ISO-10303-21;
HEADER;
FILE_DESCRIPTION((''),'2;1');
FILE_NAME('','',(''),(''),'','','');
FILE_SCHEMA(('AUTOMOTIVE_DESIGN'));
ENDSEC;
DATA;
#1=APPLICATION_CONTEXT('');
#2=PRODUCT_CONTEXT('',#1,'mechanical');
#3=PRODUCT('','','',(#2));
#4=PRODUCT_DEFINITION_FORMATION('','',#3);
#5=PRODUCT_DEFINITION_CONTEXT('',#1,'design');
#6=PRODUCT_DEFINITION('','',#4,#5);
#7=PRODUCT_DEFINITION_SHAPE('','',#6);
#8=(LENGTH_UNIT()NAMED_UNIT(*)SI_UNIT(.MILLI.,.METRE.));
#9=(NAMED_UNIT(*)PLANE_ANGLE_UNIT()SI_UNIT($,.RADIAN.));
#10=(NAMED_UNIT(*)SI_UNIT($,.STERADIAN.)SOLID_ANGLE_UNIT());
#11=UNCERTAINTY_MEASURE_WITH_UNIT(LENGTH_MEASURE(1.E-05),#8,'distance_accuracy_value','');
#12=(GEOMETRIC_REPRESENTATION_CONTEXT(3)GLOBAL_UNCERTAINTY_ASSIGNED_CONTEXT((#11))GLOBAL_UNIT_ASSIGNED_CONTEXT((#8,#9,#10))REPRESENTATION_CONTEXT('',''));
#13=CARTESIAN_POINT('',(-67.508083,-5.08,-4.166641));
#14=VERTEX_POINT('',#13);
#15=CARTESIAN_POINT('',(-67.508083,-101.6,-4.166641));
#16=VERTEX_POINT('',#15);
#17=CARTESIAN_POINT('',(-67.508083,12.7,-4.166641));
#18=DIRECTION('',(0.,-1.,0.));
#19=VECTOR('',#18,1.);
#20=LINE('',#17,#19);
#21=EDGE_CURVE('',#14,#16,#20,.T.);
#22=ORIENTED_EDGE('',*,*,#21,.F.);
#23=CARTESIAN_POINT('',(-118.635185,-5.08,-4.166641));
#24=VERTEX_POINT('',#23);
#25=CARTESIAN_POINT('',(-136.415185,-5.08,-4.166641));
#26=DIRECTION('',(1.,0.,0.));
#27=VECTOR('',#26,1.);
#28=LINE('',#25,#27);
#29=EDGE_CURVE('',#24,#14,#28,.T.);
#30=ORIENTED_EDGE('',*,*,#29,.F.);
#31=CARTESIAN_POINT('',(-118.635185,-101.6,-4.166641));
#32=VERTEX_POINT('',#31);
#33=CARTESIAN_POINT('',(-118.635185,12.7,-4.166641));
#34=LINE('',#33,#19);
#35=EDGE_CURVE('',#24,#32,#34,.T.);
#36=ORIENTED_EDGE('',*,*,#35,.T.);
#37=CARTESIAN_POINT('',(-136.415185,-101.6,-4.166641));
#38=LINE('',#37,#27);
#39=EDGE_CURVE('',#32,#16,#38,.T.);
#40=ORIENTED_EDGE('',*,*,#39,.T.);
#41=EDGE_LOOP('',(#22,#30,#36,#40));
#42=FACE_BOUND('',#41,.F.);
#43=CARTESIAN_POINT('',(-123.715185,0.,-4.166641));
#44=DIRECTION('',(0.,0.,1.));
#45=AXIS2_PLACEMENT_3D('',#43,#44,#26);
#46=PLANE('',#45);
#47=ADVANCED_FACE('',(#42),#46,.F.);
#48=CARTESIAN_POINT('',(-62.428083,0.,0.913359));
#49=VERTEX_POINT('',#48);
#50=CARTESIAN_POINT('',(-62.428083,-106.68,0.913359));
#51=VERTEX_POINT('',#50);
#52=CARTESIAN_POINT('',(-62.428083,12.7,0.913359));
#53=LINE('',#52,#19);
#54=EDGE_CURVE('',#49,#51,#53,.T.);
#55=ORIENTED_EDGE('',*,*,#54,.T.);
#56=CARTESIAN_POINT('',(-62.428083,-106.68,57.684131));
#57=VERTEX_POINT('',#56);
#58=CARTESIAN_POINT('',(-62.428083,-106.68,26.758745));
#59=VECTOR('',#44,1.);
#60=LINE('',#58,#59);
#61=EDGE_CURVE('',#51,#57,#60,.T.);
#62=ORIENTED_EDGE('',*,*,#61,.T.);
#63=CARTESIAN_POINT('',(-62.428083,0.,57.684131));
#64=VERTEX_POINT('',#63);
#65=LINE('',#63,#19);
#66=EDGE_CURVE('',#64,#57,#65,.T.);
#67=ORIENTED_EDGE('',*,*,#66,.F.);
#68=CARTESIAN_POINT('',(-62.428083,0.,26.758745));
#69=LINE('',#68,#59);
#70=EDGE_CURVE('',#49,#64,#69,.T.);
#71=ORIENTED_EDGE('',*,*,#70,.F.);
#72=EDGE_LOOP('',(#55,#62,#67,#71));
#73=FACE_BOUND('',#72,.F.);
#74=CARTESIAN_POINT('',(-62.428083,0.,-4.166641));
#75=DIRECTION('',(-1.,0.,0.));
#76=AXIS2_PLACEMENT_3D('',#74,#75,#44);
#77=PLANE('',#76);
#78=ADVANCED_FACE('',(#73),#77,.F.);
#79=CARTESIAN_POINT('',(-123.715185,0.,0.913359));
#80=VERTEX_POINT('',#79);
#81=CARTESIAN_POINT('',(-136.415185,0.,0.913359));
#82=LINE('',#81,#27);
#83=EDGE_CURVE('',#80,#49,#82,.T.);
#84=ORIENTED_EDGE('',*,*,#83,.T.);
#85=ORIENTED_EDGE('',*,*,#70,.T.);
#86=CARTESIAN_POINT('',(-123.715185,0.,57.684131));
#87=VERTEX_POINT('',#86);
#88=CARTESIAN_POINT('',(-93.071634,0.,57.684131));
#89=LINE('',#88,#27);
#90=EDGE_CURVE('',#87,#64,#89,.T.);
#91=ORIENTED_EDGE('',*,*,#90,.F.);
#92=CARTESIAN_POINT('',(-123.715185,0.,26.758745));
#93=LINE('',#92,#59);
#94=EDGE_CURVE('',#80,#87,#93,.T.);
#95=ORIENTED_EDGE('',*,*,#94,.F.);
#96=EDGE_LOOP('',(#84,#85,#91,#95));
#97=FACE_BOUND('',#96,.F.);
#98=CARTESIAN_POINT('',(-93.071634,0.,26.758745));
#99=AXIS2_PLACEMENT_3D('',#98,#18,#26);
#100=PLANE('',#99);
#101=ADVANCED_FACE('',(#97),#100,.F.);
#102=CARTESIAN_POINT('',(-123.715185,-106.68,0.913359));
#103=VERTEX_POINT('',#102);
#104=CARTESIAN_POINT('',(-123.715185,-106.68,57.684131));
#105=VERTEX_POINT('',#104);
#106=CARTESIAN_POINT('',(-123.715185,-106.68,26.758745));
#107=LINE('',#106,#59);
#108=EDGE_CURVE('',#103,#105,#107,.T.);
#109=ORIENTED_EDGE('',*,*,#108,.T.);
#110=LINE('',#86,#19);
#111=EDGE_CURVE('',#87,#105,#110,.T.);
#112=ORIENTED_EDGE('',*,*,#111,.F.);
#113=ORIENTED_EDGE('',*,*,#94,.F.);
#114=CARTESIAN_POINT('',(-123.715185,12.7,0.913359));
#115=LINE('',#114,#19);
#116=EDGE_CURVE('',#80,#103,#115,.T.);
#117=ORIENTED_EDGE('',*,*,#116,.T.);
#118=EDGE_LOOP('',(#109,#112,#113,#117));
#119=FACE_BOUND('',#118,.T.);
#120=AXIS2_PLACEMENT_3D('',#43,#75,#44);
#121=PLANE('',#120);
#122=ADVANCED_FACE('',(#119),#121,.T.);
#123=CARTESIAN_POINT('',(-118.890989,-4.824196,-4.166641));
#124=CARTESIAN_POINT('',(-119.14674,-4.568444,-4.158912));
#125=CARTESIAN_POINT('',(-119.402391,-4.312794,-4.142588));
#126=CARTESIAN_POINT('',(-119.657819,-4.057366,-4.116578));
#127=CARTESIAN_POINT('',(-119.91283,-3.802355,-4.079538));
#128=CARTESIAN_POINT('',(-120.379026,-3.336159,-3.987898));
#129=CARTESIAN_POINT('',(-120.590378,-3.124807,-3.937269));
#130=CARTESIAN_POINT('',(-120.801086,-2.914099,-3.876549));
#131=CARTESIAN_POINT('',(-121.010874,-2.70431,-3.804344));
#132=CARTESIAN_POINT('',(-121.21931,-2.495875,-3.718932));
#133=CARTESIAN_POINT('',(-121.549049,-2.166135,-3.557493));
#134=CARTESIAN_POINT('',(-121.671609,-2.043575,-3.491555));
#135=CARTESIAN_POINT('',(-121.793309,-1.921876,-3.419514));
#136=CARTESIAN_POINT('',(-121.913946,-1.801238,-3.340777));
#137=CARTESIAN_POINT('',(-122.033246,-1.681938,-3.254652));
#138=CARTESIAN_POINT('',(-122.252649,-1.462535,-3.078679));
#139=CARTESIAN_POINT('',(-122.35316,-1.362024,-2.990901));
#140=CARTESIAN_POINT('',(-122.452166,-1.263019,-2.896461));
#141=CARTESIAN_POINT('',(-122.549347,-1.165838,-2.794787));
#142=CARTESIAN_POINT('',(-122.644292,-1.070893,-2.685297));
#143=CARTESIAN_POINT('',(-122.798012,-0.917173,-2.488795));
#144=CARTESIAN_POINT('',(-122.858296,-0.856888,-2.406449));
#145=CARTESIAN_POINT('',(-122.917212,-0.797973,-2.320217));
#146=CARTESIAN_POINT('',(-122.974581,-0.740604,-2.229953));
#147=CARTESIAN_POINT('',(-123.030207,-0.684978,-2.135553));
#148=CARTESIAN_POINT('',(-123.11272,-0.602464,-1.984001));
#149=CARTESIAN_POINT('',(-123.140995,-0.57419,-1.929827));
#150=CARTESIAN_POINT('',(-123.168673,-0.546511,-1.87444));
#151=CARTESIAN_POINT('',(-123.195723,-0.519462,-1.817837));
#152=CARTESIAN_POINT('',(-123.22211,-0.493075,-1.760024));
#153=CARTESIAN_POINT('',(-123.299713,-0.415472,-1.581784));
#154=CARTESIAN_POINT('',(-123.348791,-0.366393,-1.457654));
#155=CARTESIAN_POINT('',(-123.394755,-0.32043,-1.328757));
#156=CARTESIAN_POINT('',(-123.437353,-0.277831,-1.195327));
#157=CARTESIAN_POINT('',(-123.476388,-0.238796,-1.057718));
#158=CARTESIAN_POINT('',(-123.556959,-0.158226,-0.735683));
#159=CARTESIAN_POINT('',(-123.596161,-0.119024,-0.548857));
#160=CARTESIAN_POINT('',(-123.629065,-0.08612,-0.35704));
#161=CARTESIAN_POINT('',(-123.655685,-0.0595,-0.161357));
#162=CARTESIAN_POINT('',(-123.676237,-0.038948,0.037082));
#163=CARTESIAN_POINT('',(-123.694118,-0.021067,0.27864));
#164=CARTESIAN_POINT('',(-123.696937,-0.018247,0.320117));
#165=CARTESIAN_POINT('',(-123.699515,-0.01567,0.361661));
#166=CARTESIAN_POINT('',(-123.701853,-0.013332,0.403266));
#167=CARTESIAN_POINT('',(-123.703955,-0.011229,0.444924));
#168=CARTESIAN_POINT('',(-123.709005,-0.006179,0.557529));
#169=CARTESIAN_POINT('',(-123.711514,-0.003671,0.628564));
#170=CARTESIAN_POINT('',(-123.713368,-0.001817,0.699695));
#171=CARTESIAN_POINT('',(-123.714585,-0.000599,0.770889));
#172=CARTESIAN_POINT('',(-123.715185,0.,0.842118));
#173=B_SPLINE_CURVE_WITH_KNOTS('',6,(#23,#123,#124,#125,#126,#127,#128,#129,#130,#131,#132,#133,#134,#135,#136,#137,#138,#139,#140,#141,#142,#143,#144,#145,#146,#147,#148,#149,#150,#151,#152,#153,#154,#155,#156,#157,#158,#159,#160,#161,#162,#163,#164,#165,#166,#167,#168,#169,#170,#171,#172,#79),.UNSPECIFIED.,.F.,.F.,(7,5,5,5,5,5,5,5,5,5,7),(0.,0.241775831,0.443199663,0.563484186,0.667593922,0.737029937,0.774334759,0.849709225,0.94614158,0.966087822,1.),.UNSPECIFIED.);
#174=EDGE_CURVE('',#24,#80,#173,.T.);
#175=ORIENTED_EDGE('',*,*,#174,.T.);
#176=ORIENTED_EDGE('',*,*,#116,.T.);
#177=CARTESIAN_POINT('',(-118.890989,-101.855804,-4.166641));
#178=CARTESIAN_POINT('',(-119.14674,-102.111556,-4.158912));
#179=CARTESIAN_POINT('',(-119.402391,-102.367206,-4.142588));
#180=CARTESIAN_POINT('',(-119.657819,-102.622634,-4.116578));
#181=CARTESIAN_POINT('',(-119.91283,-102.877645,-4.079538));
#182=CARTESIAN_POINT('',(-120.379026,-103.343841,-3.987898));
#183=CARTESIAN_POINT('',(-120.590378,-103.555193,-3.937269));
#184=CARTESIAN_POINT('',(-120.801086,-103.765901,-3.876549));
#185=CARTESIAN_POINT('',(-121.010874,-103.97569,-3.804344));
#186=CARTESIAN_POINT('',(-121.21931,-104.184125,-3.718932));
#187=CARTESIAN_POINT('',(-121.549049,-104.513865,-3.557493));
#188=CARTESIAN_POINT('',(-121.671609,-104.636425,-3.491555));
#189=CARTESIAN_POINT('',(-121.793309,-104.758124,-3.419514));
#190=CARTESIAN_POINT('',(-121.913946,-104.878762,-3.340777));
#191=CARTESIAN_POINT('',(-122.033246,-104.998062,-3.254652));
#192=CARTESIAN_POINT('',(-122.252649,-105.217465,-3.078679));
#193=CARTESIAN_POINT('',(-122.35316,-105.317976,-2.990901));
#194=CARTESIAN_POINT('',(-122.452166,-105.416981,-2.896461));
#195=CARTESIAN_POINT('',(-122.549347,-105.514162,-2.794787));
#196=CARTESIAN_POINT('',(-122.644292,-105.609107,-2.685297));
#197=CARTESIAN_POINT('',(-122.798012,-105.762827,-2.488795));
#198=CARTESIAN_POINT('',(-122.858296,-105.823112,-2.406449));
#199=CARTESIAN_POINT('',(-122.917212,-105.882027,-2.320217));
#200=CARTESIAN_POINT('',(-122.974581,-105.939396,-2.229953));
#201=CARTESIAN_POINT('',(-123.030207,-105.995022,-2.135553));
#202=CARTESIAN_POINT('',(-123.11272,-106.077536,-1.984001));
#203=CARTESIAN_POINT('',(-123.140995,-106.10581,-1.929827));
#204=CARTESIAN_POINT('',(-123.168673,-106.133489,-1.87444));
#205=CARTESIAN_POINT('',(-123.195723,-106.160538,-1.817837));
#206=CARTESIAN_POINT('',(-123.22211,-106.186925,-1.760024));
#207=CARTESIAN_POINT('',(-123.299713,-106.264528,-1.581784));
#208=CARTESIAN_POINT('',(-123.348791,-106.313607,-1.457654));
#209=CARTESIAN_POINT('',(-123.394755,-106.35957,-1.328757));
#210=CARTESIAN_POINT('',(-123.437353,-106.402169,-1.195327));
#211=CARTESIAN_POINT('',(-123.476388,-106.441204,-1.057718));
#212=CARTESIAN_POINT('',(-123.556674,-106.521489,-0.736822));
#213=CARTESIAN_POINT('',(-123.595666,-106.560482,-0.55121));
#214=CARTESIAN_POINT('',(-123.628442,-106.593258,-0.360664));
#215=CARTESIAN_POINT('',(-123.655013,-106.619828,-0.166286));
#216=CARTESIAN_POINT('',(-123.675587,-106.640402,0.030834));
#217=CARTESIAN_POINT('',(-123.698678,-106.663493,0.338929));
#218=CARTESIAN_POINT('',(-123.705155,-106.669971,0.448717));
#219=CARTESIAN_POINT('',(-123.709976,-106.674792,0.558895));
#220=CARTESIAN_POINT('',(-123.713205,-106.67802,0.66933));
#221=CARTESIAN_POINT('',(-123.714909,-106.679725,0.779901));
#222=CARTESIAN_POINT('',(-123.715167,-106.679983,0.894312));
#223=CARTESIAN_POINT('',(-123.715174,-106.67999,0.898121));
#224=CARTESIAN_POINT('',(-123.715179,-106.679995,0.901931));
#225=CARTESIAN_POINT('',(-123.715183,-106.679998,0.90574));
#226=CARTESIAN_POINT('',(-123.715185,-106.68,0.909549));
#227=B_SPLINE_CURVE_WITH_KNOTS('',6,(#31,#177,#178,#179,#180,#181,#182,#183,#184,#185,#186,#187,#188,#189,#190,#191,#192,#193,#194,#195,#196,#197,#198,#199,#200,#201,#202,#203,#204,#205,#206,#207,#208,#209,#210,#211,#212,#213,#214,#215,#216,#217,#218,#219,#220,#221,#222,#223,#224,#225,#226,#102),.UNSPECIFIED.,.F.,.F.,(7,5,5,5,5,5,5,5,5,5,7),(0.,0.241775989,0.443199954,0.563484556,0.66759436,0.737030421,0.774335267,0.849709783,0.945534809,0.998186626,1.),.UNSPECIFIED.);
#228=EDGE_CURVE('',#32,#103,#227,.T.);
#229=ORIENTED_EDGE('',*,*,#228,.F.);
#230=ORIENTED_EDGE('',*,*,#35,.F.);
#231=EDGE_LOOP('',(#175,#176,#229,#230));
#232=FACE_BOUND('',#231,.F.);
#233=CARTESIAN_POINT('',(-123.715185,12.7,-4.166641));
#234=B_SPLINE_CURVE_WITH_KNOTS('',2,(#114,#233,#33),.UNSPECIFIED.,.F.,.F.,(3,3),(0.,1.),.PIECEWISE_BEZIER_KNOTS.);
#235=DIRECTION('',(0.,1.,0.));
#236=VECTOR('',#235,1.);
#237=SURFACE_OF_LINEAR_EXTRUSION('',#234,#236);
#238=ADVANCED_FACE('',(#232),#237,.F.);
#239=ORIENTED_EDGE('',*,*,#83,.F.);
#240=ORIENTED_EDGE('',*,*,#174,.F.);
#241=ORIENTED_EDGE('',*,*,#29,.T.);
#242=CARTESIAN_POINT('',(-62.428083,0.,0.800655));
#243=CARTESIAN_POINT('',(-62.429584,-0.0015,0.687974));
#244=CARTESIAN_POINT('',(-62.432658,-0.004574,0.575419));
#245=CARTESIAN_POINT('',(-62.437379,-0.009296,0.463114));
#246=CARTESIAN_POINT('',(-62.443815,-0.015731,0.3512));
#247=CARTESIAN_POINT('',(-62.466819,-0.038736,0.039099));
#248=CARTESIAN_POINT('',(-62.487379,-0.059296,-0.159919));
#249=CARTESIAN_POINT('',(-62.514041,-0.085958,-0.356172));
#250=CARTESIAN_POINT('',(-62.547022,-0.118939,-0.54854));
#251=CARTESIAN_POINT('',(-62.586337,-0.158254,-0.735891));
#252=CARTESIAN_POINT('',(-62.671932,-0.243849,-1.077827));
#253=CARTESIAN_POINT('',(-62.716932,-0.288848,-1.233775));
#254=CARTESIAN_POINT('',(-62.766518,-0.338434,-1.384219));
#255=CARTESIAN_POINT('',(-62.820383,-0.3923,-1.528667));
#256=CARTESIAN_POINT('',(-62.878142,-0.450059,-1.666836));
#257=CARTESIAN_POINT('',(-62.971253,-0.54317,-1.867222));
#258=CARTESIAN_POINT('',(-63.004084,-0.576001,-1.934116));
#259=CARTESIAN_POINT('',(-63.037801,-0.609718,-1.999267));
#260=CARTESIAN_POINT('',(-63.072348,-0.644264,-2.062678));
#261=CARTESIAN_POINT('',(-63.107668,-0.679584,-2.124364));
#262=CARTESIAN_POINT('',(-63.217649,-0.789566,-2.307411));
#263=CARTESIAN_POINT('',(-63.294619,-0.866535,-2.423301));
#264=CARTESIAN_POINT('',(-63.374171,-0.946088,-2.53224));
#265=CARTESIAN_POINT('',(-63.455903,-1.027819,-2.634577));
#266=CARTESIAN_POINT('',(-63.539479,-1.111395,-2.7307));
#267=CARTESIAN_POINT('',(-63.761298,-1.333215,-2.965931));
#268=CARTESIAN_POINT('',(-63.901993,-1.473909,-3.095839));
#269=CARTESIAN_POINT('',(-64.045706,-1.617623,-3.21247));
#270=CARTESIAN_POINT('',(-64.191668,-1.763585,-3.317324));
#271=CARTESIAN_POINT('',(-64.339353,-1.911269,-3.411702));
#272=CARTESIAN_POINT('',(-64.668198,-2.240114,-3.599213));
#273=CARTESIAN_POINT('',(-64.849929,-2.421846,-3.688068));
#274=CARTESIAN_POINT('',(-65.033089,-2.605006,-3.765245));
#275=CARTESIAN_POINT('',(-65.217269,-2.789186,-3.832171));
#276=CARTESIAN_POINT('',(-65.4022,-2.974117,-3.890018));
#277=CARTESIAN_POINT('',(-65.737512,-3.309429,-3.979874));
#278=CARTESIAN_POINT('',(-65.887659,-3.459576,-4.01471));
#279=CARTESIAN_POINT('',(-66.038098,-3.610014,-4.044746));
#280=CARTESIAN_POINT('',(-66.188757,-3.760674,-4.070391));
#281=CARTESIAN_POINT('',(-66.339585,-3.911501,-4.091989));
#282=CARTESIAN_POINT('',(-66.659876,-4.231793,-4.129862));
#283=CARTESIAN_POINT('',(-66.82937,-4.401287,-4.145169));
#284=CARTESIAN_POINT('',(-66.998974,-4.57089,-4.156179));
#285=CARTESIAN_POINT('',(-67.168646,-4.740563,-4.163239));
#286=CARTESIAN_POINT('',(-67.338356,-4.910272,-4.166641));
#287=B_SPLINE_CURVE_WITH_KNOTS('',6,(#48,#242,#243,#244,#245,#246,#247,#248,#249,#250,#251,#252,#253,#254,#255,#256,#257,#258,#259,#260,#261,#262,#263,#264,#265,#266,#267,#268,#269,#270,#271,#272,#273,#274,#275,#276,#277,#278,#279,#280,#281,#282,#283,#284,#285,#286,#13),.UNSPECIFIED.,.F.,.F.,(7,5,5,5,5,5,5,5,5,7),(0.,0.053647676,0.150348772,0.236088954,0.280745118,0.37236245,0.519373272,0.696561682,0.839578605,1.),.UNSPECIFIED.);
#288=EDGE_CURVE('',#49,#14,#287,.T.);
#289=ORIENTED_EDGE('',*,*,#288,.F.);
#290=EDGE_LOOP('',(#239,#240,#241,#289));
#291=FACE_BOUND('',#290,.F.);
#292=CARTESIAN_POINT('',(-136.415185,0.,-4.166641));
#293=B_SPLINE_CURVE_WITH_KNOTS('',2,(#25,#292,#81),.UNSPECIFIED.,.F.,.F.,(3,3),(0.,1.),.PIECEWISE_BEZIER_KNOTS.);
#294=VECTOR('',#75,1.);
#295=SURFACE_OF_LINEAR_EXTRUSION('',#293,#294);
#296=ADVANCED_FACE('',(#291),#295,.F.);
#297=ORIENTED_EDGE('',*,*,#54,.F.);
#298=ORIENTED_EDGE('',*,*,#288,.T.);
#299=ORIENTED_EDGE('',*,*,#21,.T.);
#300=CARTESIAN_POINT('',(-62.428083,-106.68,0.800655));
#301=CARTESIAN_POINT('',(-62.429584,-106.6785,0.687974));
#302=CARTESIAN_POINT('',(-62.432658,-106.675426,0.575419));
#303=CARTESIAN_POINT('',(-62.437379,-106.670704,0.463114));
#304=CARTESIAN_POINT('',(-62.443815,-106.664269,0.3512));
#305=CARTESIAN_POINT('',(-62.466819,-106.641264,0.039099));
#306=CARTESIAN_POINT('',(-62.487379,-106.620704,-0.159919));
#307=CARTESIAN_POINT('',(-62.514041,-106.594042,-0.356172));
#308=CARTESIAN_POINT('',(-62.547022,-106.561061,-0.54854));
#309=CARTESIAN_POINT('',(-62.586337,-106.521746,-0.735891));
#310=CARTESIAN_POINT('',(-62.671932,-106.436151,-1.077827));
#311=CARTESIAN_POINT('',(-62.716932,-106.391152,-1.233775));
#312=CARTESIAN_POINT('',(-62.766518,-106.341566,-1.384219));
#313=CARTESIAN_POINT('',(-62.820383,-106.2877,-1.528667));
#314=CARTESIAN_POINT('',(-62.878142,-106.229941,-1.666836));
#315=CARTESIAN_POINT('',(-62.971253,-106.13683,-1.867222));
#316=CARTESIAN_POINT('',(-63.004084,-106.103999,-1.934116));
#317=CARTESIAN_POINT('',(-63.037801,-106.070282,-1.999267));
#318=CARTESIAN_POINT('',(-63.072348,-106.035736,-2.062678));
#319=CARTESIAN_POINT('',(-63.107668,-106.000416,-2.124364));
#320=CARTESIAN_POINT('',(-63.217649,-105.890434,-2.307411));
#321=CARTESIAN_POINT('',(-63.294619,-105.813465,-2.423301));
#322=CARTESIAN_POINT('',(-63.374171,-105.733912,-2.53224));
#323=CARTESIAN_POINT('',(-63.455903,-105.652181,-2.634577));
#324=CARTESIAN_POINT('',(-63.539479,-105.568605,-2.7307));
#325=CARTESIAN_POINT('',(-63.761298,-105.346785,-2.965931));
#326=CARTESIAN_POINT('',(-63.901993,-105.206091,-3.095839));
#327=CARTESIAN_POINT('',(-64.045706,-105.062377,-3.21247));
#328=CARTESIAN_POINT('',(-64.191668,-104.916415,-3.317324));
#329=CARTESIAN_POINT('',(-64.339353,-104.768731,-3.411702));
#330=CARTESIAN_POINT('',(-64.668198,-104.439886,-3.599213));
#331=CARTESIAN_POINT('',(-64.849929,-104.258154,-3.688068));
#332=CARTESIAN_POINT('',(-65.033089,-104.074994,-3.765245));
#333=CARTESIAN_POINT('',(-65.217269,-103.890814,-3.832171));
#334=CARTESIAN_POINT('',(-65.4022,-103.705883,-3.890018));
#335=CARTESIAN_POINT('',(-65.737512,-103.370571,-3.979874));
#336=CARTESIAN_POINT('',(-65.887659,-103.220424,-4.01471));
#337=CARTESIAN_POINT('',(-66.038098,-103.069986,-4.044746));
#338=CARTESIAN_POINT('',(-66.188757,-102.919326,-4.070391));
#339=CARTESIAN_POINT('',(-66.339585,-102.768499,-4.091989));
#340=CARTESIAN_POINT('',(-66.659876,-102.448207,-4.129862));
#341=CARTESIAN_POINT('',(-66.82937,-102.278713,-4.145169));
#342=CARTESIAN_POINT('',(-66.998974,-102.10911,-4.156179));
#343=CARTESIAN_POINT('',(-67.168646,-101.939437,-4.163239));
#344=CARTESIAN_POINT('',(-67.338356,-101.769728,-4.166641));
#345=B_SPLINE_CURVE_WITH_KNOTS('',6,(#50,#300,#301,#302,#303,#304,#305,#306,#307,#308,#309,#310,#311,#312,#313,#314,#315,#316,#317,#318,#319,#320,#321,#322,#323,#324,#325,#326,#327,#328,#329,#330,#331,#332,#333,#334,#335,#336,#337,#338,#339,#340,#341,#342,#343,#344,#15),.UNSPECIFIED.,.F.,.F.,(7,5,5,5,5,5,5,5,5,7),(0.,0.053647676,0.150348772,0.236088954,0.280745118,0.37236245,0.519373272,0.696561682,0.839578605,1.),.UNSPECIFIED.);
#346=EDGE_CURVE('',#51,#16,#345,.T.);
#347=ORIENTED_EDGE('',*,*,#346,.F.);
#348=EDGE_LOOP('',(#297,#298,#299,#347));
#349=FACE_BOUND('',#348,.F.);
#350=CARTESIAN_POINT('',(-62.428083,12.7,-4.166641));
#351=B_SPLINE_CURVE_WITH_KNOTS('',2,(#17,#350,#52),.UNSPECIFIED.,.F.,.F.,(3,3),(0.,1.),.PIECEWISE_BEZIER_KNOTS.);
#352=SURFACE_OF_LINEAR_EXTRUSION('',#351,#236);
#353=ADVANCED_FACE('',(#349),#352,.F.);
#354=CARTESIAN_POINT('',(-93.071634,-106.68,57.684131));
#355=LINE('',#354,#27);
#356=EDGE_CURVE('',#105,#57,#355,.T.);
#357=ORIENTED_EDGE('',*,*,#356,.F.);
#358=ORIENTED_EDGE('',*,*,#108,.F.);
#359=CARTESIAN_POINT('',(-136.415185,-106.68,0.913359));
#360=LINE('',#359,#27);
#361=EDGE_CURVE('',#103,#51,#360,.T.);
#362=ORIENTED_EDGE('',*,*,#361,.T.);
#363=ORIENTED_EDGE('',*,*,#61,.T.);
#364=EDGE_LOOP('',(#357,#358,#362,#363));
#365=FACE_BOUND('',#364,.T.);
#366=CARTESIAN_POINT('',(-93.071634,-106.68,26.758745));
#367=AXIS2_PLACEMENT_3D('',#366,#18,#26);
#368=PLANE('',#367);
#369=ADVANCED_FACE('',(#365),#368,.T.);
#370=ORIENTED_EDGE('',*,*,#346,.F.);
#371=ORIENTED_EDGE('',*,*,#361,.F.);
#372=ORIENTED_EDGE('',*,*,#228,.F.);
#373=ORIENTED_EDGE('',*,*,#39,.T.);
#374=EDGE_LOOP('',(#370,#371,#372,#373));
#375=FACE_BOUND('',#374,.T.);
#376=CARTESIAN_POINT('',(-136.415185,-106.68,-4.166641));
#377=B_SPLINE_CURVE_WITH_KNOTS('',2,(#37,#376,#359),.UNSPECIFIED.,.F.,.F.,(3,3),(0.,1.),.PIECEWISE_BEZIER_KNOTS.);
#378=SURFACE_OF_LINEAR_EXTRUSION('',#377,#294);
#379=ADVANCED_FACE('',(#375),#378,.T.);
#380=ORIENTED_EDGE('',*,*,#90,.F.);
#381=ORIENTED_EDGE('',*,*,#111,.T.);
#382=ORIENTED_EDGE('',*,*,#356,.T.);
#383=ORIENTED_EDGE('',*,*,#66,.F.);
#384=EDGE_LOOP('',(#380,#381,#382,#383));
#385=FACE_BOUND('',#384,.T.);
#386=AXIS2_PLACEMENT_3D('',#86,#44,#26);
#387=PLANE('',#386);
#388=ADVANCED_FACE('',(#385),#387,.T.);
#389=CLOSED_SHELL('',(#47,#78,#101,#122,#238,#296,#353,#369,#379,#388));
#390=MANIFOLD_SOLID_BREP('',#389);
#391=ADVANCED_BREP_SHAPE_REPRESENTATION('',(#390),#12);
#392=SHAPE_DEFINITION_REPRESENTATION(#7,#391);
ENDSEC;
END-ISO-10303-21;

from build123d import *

# Parameters (mm, degrees)
F0_W        = 61.2871013582
F0_H        = 61.8507722393
F1_DEPTH    = 106.68
F2_T1_DEPTH = 132.08
F2_T3_DEPTH = 86.6871013582


# Not quite as in the source:
# - a fillet or chamfer that OpenCascade refuses, or shapes differently, is made with other operations: its cross-section is extruded or revolved along the edge and cut away or added


with BuildPart() as f1:
    # F0 (on Front) → F1 (new body)
    with BuildSketch(Plane.XZ):
        with Locations((-93.0716339499, 26.758744847)):
            Rectangle(F0_W, F0_H)
    extrude(amount=F1_DEPTH)

    # F2: fillet of radius 5.08 on 4 edges, made by hand

    # F2_s2 → F2_t1 (cut)
    with BuildSketch(Plane.XZ.offset(-12.7)):
        with BuildLine():
            add(Edge.make_bspline(
                [(-123.715184629, 0.9133587274), (-123.715184629, -4.1666412726), (-118.635184629, -4.1666412726)],
                knots=[0, 0, 0, 1, 1, 1], degree=2, weights=[1, 1, 1]))
            Line((-118.635184629, -4.1666412726), (-123.715184629, -4.1666412726))
            Line((-123.715184629, -4.1666412726), (-123.715184629, 0.9133587274))
        make_face()
        with BuildLine():
            add(Edge.make_bspline(
                [(-67.5080832708, -4.1666412726), (-62.4280832708, -4.1666412726), (-62.4280832708, 0.9133587274)],
                knots=[0, 0, 0, 1, 1, 1], degree=2, weights=[1, 1, 1]))
            Line((-62.4280832708, 0.9133587274), (-62.4280832708, -4.1666412726))
            Line((-62.4280832708, -4.1666412726), (-67.5080832708, -4.1666412726))
        make_face()
    extrude(amount=F2_T1_DEPTH, mode=Mode.SUBTRACT)

    # F2_s4 → F2_t3 (cut)
    with BuildSketch(Plane.YZ.offset(-136.415184629)):
        with BuildLine():
            add(Edge.make_bspline(
                [(-101.6, -4.1666412726), (-106.68, -4.1666412726), (-106.68, 0.9133587274)],
                knots=[0, 0, 0, 1, 1, 1], degree=2, weights=[1, 1, 1]))
            Line((-106.68, 0.9133587274), (-106.68, -4.1666412726))
            Line((-106.68, -4.1666412726), (-101.6, -4.1666412726))
        make_face()
        with BuildLine():
            add(Edge.make_bspline(
                [(-5.08, -4.1666412726), (0, -4.1666412726), (0, 0.9133587274)],
                knots=[0, 0, 0, 1, 1, 1], degree=2, weights=[1, 1, 1]))
            Line((0, 0.9133587274), (0, -4.1666412726))
            Line((0, -4.1666412726), (-5.08, -4.1666412726))
        make_face()
    extrude(amount=F2_T3_DEPTH, mode=Mode.SUBTRACT)


solid = f1.part
